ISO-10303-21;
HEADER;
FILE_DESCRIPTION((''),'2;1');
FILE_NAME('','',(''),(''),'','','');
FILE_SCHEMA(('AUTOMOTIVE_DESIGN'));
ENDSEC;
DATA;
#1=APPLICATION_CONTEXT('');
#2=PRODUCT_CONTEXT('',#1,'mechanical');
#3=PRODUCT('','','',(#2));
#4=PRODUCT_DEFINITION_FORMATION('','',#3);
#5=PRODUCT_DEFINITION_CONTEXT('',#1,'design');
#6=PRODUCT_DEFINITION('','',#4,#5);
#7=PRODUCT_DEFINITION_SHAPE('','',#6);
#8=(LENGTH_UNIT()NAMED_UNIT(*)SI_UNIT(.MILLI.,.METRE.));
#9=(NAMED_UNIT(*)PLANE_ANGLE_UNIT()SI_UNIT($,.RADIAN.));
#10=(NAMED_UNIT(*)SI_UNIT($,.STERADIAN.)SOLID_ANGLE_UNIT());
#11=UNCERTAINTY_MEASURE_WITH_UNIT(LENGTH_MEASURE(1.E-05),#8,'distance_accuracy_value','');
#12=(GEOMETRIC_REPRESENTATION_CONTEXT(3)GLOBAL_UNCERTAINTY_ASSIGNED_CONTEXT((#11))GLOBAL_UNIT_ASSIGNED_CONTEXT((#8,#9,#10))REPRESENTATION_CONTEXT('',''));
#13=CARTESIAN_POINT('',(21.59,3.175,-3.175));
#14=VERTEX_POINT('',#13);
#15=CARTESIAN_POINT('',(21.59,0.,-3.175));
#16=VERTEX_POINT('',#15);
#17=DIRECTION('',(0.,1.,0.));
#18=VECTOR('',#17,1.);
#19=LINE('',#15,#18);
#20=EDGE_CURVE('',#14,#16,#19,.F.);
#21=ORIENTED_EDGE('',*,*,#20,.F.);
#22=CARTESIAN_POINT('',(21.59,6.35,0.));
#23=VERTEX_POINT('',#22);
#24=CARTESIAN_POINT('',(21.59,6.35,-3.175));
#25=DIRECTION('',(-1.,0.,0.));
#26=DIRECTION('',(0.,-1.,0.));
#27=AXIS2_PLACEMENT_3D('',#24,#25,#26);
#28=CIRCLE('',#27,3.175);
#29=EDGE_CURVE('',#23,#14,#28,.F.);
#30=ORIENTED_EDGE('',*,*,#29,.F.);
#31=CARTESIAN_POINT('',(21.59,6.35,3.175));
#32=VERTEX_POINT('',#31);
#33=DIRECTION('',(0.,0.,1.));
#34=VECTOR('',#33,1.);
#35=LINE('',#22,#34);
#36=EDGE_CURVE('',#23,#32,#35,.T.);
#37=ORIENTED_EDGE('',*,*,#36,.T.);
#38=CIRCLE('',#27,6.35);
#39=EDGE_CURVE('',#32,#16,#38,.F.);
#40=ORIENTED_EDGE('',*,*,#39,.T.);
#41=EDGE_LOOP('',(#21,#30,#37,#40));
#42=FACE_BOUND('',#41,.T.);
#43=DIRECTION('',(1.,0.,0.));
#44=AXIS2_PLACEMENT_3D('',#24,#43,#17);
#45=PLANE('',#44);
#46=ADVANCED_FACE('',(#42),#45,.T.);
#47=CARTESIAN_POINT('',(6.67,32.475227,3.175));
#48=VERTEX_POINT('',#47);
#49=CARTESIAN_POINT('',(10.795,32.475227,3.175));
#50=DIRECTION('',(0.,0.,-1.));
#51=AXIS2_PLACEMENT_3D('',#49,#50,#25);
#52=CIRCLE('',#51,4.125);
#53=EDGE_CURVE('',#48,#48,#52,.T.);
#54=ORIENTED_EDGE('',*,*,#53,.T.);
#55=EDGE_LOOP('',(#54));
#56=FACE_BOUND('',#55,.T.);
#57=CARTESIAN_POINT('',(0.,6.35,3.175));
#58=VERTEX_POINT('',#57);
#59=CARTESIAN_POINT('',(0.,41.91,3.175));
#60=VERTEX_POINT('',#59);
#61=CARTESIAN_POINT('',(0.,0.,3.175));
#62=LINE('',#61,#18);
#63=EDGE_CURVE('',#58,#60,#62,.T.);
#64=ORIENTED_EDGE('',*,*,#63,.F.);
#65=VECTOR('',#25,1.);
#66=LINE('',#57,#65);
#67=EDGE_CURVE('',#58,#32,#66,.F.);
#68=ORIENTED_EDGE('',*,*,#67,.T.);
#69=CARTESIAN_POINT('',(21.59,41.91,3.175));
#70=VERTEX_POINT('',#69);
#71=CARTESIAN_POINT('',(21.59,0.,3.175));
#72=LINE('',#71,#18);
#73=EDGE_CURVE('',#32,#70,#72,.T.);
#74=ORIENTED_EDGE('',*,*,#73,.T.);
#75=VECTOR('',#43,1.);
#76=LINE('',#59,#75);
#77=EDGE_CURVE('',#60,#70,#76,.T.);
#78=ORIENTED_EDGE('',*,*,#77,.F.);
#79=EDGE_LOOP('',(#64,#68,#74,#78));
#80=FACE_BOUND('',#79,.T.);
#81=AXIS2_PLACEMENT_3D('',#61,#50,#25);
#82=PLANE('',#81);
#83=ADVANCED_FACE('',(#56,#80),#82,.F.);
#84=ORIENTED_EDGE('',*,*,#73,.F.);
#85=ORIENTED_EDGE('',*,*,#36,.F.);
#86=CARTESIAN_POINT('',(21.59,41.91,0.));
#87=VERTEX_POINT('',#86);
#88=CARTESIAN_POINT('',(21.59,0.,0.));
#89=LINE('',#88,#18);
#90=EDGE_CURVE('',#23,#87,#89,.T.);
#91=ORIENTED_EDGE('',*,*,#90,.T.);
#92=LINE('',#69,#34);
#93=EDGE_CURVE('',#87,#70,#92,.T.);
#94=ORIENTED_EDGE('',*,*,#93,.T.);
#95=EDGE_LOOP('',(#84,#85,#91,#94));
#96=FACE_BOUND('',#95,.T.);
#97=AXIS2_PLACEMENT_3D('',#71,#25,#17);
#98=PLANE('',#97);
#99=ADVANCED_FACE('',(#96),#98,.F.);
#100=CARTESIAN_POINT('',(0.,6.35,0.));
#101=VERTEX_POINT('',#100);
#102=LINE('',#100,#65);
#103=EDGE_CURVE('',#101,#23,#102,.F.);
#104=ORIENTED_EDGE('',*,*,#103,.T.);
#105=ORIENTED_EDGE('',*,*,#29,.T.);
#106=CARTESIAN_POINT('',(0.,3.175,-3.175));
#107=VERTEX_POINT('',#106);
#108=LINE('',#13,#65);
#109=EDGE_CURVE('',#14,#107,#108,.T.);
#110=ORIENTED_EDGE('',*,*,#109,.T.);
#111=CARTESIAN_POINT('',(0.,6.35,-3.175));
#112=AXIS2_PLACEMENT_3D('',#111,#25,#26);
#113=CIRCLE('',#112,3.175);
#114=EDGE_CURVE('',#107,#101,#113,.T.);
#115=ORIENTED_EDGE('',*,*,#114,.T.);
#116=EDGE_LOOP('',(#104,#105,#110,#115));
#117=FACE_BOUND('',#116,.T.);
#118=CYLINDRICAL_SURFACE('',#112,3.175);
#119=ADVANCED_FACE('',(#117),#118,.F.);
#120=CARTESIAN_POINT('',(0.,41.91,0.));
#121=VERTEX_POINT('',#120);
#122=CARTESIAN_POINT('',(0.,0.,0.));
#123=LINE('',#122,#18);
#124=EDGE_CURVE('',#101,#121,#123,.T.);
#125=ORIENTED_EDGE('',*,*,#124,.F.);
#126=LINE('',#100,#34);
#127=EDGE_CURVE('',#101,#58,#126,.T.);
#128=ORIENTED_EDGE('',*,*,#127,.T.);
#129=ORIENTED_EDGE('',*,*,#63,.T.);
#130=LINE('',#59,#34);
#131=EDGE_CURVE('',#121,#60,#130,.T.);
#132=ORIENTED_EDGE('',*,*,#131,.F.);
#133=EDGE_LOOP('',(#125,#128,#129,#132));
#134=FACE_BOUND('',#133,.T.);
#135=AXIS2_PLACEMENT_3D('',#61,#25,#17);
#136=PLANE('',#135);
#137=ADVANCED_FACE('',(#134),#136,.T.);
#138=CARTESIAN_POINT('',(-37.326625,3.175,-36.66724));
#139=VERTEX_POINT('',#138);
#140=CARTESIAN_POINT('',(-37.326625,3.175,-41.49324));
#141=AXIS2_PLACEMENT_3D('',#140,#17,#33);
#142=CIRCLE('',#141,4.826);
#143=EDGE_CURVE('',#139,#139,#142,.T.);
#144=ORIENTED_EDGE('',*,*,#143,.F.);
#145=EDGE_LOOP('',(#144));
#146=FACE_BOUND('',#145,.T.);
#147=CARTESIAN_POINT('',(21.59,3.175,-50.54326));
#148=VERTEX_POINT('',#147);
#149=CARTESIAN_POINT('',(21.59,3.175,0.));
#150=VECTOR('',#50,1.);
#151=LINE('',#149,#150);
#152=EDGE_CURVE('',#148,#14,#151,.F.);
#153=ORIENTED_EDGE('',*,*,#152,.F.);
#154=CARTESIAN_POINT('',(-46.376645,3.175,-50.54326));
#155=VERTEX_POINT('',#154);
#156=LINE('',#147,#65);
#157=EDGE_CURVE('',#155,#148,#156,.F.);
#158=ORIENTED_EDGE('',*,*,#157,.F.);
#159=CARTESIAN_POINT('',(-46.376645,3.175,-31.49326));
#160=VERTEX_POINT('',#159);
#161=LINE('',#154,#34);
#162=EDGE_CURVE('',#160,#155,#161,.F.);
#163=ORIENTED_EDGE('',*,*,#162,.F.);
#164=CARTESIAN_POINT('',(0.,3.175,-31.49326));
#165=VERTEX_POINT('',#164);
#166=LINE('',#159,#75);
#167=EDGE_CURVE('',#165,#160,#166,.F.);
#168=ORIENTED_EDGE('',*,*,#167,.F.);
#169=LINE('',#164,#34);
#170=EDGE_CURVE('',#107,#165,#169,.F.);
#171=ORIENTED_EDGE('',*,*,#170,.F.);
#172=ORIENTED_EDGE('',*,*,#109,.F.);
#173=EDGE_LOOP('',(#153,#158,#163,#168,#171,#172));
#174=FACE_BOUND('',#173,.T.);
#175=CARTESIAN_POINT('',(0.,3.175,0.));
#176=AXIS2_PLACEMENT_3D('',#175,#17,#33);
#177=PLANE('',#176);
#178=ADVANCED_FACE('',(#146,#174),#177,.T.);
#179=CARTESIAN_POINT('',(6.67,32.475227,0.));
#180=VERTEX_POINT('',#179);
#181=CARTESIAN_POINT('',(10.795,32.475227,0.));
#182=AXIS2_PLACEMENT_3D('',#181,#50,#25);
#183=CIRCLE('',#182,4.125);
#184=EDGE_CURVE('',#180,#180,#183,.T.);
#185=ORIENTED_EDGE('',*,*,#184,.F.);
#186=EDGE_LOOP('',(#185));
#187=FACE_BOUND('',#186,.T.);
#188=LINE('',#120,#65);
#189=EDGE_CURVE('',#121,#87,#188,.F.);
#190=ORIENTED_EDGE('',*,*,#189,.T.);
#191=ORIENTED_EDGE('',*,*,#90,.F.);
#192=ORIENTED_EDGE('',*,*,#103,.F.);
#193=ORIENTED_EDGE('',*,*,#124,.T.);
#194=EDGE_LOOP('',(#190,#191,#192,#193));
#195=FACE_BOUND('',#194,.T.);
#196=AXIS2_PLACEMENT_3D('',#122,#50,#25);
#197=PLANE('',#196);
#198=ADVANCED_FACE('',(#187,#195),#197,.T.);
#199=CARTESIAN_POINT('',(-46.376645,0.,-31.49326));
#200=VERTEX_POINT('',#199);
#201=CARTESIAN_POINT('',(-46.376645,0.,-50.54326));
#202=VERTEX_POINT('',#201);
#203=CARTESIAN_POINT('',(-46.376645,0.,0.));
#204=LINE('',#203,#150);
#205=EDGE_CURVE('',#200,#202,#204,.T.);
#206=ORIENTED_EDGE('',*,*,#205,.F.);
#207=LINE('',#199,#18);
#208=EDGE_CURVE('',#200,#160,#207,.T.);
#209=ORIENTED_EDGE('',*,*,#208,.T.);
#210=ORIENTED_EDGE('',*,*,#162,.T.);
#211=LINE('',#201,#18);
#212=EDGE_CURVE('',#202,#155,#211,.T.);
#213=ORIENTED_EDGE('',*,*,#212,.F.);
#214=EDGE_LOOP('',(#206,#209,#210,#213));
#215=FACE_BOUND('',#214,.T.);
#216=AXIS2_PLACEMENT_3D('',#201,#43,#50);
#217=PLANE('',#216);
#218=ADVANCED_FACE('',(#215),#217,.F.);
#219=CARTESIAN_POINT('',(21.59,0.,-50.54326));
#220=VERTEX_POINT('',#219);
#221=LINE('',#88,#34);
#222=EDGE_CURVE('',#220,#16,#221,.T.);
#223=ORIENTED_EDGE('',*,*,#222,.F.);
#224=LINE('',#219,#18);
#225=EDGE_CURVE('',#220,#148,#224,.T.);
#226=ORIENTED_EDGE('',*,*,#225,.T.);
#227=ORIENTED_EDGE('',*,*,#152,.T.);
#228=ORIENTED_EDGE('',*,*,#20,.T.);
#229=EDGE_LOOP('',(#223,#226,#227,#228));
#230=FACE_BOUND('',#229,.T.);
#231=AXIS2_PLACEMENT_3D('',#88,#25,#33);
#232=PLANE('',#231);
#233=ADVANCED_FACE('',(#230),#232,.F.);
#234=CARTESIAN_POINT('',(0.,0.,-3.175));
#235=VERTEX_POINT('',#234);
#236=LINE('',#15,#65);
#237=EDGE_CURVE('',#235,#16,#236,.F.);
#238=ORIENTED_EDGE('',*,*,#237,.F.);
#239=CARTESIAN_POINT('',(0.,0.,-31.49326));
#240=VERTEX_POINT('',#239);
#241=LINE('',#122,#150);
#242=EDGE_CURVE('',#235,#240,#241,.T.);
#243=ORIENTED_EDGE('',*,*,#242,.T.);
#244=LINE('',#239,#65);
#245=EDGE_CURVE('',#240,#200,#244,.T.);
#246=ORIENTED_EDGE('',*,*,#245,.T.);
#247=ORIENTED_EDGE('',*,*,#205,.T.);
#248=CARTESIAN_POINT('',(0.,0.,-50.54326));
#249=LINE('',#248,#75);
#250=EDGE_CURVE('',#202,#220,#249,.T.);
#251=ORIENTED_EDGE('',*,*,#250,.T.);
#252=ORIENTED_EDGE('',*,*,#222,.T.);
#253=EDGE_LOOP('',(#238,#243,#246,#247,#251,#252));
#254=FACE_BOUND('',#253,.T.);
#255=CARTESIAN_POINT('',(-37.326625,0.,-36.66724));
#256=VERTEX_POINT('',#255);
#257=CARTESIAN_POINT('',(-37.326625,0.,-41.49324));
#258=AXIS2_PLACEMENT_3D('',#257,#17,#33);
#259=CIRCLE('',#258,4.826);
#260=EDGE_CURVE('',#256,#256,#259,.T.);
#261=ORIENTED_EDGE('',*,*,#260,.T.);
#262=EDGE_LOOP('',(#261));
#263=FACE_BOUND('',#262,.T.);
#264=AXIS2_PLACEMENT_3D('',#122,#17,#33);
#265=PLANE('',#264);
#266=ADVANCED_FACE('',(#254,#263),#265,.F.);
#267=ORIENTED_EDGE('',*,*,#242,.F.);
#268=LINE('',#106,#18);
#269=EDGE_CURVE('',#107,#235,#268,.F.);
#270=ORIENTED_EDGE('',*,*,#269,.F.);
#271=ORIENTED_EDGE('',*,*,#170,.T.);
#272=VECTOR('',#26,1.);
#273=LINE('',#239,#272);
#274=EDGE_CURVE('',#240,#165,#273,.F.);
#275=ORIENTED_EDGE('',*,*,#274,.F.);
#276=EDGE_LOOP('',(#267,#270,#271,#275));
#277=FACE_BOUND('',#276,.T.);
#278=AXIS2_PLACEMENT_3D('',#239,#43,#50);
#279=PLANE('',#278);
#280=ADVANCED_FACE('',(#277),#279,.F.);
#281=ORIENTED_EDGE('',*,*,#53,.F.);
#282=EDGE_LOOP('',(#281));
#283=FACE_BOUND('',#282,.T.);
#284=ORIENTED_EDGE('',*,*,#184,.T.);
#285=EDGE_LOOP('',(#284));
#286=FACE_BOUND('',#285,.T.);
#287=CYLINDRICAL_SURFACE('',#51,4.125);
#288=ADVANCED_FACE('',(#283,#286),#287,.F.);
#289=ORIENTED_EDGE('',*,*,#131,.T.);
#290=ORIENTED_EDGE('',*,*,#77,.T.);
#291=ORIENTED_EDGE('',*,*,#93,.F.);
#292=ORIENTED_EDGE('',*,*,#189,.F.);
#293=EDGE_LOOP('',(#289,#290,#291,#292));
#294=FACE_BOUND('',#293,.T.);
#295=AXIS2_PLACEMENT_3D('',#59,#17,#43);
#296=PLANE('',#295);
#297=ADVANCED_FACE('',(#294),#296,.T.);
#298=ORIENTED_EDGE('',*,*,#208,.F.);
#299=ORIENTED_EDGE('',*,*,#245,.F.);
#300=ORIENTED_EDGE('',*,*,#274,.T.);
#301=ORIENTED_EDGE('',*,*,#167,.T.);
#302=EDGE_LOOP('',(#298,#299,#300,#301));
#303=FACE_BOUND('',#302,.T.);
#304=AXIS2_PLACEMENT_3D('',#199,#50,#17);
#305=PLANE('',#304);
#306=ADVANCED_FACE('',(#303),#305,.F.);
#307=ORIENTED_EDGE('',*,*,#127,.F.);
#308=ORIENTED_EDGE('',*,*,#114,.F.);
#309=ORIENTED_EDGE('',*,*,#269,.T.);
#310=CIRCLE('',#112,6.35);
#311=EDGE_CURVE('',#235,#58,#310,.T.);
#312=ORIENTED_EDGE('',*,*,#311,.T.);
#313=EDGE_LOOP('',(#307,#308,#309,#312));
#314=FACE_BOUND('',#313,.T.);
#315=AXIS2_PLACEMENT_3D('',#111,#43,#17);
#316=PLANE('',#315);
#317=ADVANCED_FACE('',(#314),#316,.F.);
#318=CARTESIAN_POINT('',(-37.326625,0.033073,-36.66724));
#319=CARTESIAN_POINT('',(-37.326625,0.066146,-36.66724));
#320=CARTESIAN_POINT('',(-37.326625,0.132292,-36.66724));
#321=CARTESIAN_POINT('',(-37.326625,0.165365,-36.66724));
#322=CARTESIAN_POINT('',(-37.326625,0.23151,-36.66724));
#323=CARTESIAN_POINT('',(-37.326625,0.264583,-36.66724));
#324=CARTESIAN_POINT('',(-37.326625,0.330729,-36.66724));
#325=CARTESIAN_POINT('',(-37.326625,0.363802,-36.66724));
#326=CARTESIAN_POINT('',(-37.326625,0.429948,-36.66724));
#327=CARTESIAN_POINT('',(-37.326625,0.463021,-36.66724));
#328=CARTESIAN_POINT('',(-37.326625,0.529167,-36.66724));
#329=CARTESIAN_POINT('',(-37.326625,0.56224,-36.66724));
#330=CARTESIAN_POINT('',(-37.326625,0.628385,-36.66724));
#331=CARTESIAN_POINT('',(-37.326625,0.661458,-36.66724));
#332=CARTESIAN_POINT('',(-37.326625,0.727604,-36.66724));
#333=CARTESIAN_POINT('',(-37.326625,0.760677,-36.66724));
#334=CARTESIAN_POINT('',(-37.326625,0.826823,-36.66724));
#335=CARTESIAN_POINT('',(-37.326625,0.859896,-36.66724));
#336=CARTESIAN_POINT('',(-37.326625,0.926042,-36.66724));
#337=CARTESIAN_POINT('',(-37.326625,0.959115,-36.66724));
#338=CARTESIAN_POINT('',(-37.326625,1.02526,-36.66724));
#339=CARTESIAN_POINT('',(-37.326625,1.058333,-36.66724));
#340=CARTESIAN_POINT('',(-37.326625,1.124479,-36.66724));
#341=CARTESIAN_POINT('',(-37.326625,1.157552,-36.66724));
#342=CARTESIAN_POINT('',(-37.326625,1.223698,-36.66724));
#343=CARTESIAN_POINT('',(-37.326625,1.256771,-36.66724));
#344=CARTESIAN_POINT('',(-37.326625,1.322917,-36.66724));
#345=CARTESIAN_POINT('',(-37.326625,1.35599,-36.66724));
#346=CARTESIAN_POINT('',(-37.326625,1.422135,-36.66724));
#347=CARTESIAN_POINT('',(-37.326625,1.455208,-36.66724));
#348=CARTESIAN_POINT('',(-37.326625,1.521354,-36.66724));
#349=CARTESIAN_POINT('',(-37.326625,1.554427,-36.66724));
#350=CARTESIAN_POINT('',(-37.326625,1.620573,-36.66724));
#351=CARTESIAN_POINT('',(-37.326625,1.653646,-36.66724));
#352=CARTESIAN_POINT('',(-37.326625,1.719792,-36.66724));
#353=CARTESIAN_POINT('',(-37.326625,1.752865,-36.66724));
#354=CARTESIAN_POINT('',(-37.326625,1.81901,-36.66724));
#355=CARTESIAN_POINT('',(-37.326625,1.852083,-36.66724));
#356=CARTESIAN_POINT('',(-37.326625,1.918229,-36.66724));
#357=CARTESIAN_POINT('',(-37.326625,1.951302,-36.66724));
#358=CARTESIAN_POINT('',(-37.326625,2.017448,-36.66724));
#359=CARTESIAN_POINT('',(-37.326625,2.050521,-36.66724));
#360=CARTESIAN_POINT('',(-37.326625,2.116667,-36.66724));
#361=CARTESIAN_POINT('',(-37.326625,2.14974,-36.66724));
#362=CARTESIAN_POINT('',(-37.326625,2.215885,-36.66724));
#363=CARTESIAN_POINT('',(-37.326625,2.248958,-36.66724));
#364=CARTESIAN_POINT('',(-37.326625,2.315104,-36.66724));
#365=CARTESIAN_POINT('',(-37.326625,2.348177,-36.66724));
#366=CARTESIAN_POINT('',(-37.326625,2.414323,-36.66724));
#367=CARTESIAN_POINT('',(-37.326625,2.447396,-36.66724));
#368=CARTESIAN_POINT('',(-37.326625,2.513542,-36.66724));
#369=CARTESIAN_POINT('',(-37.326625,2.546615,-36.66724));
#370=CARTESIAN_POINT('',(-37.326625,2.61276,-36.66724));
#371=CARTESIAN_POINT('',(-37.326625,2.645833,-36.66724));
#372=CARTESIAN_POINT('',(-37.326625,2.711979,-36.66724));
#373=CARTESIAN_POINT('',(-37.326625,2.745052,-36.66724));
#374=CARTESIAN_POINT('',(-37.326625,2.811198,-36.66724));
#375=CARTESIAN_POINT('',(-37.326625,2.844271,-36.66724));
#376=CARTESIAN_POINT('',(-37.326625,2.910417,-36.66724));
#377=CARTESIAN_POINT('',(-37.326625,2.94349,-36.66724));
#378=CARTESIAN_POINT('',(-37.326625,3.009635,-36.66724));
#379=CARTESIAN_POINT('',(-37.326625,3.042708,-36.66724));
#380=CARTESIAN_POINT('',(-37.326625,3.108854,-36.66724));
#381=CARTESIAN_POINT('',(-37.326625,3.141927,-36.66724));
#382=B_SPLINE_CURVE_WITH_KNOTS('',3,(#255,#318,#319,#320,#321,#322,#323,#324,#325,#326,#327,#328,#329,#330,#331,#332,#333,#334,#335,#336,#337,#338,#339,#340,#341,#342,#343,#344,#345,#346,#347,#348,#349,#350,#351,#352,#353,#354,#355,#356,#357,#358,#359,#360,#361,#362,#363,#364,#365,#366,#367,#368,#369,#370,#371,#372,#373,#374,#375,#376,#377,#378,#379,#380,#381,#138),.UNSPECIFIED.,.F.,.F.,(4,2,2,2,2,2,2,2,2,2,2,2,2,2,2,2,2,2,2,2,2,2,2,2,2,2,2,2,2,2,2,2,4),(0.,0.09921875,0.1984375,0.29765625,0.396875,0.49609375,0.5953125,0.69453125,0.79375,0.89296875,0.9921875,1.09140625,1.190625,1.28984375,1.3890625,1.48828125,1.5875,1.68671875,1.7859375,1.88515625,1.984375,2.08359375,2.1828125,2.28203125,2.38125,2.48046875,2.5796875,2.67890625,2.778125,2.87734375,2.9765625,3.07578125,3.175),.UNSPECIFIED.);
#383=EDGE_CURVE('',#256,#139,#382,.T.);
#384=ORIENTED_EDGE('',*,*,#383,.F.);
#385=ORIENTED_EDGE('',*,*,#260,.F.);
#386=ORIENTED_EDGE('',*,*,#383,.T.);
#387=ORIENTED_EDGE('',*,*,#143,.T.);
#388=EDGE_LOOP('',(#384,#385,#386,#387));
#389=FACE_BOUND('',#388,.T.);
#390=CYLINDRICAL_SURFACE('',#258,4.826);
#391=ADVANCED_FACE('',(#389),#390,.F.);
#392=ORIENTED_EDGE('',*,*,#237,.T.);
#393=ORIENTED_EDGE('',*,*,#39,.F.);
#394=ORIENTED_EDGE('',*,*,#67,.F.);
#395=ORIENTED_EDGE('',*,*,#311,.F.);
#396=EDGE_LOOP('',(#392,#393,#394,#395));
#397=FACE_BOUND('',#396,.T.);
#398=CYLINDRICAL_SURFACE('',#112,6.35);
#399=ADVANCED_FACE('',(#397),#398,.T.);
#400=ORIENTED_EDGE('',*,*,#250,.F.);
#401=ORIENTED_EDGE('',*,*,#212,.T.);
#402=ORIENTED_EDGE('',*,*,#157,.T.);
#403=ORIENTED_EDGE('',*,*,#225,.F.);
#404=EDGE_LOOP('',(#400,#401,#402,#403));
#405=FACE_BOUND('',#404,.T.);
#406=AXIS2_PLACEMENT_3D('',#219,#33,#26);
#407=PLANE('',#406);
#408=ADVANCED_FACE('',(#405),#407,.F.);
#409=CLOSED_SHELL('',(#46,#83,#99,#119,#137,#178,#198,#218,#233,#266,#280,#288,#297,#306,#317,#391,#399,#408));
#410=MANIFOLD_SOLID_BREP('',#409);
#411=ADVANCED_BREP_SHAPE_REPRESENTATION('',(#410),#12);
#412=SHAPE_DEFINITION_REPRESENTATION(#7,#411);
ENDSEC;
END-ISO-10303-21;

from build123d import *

# Parameters (mm, degrees)
SKETCH1_W                    = 21.59
SKETCH1_H                    = 41.91
SKETCH1_R                    = 4.124999878
BOSS_EXTRUDE1_DEPTH          = 3.175
EDGE_FLANGE2_STRIP_W         = 19.05
EDGE_FLANGE2_STRIP_H         = 3.175
EDGE_FLANGE2_STRIP_CUT_DEPTH = 21.59
EDGE_FLANGE2_DEPTH           = 21.59
EDGE_FLANGE2_FLAT_DEPTH      = 3.175
SKETCH12_R                   = 4.826
CUT_EXTRUDE1_DEPTH           = 79.776992708


# Sheet-metal steps are written as plain solids
with BuildPart() as part:
    # Sketch1 → Boss-Extrude1 (new body)
    with BuildSketch(Plane.XY):
        with Locations((10.795, 20.955)):
            Rectangle(SKETCH1_W, SKETCH1_H)
        with Locations(Location((10.795, 32.475227484, 0), (0, 0, 180))):
            Circle(SKETCH1_R, mode=Mode.SUBTRACT)
    extrude(amount=BOSS_EXTRUDE1_DEPTH)

    # Edge-Flange2 strip (across the edge) → Edge-Flange2 strip cut (cut)
    with BuildSketch(Plane(origin=(21.59, 0, 0), x_dir=(0, 1, 0), z_dir=(-1, 0, 0))):
        with Locations((-3.175, -1.5875)):
            Rectangle(EDGE_FLANGE2_STRIP_W, EDGE_FLANGE2_STRIP_H)
    extrude(amount=EDGE_FLANGE2_STRIP_CUT_DEPTH, mode=Mode.SUBTRACT)

    # Edge-Flange2 bend section (across the edge) → Edge-Flange2 (add)
    with BuildSketch(Plane(origin=(21.59, 0, 0), x_dir=(0, 1, 0), z_dir=(-1, 0, 0))):
        with BuildLine():
            Line((0, 3.175), (3.175, 3.175))
            ThreePointArc((3.175, 3.175), (4.10493597, 0.92993597), (6.35, 0))
            Line((6.35, 0), (6.35, -3.175))
            ThreePointArc((6.35, -3.175), (1.859871939, -1.315128061), (0, 3.175))
        make_face()
    extrude(amount=EDGE_FLANGE2_DEPTH)

    # Edge-Flange2 profile (on flange) → Edge-Flange2 flat (add)
    with BuildSketch(Plane(origin=(0, 0, 0), x_dir=(-1, 0, 0), z_dir=(0, -1, 0))):
        Polygon((0, 3.175), (0, 31.493260102), (27.326645128, 31.493260102), (46.376645128, 31.493260102), (46.376645128, 50.543260102), (27.326645128, 50.543260102), (0, 50.543260102), (-21.59, 50.543260102), (-21.59, 3.175), align=None)
    extrude(amount=-EDGE_FLANGE2_FLAT_DEPTH)

    # Sketch12 → Cut-Extrude1 (cut, through all)
    with BuildSketch(Plane(origin=(0, 3.175, 0), x_dir=(1, 0, 0), z_dir=(0, 1, 0))):
        with Locations(Location((-37.326625128, 41.493240102, 0), (0, 0, 270))):
            Circle(SKETCH12_R)
    extrude(amount=-CUT_EXTRUDE1_DEPTH, mode=Mode.SUBTRACT)


solid = part.part
